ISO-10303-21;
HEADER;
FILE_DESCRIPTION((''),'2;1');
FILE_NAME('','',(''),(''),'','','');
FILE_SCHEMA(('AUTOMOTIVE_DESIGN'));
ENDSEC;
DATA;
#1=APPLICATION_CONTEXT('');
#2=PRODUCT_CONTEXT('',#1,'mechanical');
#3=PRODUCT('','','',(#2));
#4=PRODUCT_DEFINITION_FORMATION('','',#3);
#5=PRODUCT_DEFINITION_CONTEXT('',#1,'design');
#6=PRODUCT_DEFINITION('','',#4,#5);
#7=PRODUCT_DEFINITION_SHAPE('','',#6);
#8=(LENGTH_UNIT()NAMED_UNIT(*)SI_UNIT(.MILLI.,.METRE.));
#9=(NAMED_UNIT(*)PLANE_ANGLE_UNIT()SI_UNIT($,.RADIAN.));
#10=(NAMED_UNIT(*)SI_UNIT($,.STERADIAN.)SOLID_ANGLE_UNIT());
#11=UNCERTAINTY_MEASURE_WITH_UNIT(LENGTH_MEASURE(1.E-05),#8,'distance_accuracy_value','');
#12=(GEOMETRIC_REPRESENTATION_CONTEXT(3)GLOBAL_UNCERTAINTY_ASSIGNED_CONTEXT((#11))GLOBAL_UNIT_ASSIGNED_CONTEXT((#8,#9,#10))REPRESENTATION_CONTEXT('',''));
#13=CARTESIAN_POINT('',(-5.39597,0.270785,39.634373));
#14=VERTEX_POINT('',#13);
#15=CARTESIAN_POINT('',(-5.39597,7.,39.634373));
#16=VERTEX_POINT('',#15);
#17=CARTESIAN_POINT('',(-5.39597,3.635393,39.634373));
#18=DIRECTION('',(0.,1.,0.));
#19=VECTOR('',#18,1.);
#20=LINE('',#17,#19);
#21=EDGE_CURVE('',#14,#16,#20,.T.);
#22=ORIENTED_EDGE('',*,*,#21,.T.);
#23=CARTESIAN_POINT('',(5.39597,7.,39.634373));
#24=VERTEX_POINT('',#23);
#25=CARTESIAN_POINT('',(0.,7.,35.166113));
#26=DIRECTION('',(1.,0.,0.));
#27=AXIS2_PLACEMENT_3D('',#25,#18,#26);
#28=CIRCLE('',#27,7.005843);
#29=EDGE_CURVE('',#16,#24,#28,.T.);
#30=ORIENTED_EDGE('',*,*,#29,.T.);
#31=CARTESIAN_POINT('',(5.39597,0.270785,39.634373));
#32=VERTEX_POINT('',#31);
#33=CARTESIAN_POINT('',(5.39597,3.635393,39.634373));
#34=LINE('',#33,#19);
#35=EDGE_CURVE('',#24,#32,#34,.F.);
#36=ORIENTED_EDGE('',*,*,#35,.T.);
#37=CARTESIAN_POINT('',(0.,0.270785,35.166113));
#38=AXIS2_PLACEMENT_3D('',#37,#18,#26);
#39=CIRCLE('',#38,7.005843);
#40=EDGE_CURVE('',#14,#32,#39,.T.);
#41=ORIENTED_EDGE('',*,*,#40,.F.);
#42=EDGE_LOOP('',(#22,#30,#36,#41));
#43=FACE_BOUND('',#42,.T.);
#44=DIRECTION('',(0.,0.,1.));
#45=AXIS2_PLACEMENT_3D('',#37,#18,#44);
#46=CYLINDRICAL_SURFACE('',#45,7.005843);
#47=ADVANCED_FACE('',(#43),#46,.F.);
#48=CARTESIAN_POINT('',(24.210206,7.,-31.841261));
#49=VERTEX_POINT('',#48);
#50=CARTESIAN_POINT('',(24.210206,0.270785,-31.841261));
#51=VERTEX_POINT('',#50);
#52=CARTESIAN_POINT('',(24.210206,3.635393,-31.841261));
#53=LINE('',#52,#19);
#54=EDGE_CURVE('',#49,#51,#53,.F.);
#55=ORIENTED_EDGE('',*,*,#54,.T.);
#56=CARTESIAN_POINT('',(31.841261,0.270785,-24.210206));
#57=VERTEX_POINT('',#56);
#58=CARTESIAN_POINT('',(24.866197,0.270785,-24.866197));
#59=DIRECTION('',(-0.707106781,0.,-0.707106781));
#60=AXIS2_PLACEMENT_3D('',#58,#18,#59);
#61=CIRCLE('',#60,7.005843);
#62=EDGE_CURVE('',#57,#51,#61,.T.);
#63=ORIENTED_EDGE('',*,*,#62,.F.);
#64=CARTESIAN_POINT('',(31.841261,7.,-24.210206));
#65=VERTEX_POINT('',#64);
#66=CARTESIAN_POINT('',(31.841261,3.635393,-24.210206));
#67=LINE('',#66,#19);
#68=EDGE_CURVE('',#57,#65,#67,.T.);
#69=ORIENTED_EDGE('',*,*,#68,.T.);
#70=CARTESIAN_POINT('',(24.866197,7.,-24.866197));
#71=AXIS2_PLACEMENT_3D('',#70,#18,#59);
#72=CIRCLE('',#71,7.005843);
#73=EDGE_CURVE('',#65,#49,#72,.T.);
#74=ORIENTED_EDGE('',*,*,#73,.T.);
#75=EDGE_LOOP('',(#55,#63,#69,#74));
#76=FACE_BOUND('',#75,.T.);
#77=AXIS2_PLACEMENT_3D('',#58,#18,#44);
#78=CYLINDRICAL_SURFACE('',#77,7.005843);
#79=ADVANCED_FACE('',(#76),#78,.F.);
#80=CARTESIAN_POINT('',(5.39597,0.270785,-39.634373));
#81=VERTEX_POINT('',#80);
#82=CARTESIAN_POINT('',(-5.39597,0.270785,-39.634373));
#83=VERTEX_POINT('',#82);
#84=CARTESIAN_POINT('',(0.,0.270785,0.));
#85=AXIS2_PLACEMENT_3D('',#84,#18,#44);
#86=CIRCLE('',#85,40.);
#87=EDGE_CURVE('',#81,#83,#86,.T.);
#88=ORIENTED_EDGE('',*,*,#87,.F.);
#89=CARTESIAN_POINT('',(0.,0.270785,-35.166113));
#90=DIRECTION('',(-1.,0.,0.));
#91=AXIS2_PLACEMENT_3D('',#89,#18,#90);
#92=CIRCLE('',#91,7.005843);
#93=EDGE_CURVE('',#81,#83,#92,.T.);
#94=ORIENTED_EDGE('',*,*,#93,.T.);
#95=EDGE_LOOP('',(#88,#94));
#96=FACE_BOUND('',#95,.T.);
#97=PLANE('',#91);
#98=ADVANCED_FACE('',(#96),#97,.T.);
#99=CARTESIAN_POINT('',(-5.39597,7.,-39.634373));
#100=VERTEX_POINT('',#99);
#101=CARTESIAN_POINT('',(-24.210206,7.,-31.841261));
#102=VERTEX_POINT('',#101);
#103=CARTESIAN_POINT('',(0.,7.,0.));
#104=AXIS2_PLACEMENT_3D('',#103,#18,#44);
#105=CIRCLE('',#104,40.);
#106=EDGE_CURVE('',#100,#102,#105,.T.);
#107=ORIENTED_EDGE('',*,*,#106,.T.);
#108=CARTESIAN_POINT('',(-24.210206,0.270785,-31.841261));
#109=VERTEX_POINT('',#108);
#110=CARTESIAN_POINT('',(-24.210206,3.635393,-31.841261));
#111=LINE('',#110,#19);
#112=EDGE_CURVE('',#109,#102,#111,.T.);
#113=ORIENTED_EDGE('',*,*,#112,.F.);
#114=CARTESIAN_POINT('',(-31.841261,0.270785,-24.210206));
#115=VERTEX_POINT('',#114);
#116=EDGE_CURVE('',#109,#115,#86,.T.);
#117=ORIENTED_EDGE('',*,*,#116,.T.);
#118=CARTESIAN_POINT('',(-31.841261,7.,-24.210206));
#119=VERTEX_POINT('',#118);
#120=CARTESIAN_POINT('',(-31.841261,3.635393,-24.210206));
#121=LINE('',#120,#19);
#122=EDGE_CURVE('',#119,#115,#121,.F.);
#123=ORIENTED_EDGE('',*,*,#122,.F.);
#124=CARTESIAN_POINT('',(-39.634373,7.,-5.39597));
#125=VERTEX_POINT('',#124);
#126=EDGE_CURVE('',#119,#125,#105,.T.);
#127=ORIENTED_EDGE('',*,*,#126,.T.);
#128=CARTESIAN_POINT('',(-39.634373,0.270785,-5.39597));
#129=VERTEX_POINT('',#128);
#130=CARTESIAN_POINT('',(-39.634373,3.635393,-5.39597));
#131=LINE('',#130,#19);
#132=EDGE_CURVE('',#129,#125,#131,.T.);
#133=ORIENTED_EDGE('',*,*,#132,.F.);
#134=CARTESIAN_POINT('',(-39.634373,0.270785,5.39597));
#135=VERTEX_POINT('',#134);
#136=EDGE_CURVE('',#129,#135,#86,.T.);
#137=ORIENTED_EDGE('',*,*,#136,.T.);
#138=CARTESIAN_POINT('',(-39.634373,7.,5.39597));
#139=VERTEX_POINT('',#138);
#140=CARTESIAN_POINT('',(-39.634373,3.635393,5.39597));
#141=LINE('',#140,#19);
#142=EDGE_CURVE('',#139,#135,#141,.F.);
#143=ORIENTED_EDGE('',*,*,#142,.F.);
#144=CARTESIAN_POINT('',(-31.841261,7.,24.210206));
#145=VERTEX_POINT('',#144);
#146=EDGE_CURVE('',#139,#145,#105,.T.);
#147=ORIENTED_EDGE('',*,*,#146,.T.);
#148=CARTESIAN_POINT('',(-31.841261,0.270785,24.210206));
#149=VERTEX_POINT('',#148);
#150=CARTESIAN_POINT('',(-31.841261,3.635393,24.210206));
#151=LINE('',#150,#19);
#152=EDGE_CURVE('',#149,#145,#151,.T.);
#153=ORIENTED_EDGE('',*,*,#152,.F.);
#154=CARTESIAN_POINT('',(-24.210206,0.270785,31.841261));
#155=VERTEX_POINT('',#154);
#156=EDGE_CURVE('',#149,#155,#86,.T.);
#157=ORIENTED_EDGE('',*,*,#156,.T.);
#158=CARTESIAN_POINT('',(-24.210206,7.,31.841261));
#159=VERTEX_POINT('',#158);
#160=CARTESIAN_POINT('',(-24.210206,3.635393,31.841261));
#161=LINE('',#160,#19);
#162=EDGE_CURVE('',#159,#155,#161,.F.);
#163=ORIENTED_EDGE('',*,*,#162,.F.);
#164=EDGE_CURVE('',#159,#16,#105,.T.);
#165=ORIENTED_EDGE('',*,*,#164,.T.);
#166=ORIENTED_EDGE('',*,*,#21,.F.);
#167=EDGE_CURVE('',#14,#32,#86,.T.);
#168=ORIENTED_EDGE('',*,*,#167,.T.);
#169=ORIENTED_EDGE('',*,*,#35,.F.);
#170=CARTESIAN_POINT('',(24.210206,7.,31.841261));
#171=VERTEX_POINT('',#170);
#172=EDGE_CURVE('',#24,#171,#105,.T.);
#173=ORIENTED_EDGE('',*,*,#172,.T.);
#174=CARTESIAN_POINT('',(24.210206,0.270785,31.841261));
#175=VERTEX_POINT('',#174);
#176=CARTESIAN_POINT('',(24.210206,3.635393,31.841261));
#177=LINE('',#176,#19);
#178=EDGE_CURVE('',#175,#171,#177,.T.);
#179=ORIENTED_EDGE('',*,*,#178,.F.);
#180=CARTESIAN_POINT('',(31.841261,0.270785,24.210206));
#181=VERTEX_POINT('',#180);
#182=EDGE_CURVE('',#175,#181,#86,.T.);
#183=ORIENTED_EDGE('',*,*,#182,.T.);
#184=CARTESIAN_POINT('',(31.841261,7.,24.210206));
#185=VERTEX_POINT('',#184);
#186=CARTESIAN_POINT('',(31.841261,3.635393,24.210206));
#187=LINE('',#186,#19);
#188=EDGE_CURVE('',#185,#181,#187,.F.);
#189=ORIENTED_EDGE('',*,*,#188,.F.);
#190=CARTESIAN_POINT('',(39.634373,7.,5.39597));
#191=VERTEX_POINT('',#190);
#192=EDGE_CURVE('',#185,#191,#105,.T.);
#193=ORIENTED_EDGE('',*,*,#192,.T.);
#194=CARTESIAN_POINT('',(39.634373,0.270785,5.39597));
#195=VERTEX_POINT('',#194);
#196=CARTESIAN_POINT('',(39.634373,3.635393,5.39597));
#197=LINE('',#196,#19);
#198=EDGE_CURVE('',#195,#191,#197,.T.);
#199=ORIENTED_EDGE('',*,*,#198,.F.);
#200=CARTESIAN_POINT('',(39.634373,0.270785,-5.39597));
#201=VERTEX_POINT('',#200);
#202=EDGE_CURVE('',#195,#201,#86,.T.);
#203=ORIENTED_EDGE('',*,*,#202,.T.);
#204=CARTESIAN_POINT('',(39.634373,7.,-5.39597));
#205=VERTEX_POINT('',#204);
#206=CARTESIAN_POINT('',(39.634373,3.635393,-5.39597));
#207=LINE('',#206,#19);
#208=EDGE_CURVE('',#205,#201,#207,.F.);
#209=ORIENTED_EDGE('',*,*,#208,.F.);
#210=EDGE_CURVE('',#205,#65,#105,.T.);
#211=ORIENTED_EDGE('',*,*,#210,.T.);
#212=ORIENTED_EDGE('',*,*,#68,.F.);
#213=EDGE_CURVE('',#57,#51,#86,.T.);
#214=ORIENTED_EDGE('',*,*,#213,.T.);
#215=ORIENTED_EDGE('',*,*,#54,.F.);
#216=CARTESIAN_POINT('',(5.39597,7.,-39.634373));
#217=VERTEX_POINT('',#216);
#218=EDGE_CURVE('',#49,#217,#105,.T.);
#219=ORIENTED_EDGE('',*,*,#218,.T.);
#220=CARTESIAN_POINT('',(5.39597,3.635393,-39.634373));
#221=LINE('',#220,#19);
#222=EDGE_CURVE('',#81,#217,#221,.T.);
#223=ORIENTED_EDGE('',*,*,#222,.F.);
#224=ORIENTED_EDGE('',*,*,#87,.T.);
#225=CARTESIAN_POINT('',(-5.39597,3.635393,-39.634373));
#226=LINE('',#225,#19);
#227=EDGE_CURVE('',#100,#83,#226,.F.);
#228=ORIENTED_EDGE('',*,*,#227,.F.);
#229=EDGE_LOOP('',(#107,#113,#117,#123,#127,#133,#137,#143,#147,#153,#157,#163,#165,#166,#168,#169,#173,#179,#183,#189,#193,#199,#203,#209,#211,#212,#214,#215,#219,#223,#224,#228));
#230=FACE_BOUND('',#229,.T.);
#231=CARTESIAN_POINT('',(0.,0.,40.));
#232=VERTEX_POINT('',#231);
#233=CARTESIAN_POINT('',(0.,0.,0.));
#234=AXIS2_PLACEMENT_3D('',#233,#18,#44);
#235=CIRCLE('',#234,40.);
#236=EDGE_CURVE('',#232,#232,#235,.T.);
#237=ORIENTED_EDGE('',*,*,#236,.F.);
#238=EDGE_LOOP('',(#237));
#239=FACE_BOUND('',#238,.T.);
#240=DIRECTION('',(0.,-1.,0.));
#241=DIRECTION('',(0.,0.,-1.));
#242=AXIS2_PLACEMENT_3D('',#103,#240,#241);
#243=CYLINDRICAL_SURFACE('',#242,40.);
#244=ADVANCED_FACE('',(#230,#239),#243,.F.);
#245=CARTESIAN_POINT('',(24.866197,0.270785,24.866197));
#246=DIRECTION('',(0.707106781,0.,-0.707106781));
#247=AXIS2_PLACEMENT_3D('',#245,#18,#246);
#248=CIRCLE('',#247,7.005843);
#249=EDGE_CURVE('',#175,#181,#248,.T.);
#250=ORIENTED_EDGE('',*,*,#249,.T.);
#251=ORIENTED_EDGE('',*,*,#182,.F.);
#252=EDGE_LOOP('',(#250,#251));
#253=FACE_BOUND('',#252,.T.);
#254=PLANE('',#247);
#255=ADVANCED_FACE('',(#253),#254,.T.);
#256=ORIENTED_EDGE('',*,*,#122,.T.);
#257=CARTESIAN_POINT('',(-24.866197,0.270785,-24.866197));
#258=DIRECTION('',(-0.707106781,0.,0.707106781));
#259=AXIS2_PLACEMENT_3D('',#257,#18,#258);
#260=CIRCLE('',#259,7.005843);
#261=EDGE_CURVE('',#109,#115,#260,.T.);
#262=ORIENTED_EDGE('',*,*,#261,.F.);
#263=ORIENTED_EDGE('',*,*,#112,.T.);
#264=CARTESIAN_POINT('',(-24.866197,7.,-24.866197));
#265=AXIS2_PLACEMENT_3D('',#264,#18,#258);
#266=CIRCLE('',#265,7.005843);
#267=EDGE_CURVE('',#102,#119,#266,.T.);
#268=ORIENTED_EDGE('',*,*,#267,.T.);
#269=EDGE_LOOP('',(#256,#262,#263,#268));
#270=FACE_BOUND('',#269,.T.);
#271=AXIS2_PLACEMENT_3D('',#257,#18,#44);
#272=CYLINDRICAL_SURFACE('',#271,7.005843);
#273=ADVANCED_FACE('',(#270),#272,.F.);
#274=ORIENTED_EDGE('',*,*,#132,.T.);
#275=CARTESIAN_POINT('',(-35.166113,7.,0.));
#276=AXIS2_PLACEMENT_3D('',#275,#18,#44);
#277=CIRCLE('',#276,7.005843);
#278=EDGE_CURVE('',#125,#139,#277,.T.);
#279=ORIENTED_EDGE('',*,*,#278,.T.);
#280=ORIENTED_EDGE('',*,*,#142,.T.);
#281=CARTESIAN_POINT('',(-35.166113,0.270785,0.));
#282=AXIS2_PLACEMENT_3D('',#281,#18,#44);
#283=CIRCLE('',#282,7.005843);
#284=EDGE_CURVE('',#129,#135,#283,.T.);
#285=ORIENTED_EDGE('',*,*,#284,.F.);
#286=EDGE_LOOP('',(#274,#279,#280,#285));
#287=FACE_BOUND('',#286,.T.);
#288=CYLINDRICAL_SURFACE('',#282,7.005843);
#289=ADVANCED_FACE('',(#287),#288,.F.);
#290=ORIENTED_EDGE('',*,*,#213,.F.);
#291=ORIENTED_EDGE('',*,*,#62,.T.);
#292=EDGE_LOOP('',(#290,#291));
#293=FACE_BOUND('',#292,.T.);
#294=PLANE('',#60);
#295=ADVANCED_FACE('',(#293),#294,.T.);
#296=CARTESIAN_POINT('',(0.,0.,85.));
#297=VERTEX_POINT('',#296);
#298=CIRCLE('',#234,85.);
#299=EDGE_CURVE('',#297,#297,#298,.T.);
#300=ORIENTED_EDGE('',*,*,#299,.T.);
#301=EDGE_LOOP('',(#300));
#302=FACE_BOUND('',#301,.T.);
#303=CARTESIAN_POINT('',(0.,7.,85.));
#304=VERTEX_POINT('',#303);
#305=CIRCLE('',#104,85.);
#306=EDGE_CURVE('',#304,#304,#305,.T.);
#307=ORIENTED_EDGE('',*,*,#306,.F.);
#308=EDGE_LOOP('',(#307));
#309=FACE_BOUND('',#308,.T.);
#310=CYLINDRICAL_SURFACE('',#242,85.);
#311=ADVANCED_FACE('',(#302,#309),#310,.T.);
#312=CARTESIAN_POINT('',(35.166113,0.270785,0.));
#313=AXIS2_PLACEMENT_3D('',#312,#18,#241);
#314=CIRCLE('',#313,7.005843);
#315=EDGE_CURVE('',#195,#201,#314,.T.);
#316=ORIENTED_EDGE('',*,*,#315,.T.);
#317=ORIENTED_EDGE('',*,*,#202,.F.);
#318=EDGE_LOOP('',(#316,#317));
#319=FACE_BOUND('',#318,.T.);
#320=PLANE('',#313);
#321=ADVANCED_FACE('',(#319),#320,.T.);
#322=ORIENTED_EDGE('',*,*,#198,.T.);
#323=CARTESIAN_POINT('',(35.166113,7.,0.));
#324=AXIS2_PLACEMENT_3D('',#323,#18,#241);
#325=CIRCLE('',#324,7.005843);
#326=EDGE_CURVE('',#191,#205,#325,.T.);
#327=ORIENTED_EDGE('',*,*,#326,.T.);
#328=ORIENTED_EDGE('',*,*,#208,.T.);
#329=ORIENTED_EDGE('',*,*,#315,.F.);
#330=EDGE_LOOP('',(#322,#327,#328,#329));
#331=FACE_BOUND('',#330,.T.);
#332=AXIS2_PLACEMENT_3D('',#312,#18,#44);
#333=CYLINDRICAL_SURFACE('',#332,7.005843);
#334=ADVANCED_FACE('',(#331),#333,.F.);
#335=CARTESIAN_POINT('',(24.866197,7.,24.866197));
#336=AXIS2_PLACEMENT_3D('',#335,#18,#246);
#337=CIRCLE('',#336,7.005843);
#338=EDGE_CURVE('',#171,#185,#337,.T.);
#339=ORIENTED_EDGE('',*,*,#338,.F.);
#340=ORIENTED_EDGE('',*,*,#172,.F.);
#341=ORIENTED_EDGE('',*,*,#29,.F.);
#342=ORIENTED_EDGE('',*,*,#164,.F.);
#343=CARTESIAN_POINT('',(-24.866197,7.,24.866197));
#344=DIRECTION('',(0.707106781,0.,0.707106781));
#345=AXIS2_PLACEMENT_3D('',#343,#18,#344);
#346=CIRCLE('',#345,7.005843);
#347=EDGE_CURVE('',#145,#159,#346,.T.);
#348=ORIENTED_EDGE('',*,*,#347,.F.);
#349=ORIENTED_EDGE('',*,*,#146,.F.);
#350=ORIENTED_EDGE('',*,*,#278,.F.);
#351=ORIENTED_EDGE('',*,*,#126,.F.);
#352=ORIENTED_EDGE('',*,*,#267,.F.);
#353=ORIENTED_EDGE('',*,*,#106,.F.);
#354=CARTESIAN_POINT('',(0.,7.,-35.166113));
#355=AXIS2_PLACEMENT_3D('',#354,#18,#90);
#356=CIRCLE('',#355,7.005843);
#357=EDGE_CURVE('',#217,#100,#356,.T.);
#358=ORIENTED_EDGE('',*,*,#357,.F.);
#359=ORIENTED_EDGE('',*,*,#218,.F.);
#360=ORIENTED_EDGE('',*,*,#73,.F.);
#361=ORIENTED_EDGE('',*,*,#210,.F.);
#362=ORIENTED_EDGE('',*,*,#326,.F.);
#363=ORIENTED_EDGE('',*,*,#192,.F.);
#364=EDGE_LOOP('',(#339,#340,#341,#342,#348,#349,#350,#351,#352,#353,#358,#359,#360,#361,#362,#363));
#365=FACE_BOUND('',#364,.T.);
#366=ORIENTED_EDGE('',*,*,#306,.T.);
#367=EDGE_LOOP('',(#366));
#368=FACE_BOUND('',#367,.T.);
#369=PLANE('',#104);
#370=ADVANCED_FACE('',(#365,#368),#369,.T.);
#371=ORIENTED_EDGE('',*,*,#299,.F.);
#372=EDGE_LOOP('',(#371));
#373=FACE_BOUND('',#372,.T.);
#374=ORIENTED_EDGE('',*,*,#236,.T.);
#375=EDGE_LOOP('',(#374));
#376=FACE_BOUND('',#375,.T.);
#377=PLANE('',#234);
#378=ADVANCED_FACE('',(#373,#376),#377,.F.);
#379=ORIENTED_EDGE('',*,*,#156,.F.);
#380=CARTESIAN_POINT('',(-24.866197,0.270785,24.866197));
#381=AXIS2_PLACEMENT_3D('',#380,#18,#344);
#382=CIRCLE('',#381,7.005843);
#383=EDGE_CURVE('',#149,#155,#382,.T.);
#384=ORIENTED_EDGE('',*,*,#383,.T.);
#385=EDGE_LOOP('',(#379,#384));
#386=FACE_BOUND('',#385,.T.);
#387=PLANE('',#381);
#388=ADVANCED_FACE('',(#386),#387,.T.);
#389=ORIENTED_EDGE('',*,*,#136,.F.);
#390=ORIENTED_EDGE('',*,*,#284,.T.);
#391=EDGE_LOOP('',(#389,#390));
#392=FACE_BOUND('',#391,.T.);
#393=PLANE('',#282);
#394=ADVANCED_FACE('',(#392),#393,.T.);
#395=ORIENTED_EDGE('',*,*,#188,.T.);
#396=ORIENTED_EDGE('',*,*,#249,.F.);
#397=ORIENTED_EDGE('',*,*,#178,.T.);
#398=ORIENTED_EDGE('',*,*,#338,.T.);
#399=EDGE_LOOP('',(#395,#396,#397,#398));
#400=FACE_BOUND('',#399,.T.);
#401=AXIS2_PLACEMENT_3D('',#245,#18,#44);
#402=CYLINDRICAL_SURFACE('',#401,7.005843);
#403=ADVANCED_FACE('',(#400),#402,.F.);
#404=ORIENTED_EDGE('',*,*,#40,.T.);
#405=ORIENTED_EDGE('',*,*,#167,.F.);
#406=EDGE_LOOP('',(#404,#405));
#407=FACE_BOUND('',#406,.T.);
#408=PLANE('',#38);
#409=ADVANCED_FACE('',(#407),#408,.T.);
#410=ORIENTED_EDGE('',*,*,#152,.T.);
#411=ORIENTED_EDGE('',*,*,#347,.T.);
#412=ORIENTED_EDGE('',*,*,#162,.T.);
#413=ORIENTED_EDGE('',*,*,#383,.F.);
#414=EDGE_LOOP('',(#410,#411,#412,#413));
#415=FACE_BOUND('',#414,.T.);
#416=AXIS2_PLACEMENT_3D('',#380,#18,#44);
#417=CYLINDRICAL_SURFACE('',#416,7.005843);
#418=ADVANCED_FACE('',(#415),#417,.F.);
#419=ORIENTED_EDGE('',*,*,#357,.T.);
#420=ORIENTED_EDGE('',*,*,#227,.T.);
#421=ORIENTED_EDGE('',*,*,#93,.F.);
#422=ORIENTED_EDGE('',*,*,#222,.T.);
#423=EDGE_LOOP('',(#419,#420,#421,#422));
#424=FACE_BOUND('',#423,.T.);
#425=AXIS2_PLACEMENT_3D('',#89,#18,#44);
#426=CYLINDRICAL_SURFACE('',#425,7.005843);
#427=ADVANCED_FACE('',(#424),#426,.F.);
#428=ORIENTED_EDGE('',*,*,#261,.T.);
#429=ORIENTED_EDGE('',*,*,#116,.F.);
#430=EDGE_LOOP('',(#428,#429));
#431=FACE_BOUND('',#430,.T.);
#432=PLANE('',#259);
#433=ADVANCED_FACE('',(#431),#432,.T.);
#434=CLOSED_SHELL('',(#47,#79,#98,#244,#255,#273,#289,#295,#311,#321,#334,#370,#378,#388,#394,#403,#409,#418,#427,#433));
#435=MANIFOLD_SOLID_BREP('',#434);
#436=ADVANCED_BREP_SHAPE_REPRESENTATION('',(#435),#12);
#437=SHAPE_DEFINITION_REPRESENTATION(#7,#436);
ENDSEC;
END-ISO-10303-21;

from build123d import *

# Parameters (mm, degrees)
SKETCH1_R           = 85
BOSS_EXTRUDE1_DEPTH = 7
SKETCH2_R           = 40
CUT_EXTRUDE1_DEPTH  = 121.411793442
SKETCH3_R           = 7.005843143
CUT_EXTRUDE2_DEPTH  = 6.72921496
CIRPATTERN1_COUNT   = 8


with BuildPart() as part:
    # Sketch1 → Boss-Extrude1 (new body)
    with BuildSketch(Plane(origin=(0, 0, 0), x_dir=(1, 0, 0), z_dir=(0, 1, 0))):
        Circle(SKETCH1_R)
    extrude(amount=BOSS_EXTRUDE1_DEPTH)

    # Sketch2 → Cut-Extrude1 (cut, through all)
    with BuildSketch(Plane(origin=(0, 0, 0), x_dir=(1, 0, 0), z_dir=(0, 1, 0))):
        Circle(SKETCH2_R)
    extrude(amount=CUT_EXTRUDE1_DEPTH, mode=Mode.SUBTRACT)

    # Sketch3 → Cut-Extrude2 (cut)
    with BuildSketch(Plane(origin=(0, 7, 0), x_dir=(1, 0, 0), z_dir=(0, 1, 0))):
        with Locations((-35.166113495, 0)):
            Circle(SKETCH3_R)
    cut_extrude2 = extrude(amount=-CUT_EXTRUDE2_DEPTH, mode=Mode.SUBTRACT)

    # CirPattern1: Cut-Extrude2 ×8 about axis
    cirpattern1_axis = Axis((0, 0, 0), (0, 1, 0))
    for i in range(1, CIRPATTERN1_COUNT):
        add(cut_extrude2.rotate(cirpattern1_axis, i * 360 / CIRPATTERN1_COUNT), mode=Mode.SUBTRACT)


solid = part.part
